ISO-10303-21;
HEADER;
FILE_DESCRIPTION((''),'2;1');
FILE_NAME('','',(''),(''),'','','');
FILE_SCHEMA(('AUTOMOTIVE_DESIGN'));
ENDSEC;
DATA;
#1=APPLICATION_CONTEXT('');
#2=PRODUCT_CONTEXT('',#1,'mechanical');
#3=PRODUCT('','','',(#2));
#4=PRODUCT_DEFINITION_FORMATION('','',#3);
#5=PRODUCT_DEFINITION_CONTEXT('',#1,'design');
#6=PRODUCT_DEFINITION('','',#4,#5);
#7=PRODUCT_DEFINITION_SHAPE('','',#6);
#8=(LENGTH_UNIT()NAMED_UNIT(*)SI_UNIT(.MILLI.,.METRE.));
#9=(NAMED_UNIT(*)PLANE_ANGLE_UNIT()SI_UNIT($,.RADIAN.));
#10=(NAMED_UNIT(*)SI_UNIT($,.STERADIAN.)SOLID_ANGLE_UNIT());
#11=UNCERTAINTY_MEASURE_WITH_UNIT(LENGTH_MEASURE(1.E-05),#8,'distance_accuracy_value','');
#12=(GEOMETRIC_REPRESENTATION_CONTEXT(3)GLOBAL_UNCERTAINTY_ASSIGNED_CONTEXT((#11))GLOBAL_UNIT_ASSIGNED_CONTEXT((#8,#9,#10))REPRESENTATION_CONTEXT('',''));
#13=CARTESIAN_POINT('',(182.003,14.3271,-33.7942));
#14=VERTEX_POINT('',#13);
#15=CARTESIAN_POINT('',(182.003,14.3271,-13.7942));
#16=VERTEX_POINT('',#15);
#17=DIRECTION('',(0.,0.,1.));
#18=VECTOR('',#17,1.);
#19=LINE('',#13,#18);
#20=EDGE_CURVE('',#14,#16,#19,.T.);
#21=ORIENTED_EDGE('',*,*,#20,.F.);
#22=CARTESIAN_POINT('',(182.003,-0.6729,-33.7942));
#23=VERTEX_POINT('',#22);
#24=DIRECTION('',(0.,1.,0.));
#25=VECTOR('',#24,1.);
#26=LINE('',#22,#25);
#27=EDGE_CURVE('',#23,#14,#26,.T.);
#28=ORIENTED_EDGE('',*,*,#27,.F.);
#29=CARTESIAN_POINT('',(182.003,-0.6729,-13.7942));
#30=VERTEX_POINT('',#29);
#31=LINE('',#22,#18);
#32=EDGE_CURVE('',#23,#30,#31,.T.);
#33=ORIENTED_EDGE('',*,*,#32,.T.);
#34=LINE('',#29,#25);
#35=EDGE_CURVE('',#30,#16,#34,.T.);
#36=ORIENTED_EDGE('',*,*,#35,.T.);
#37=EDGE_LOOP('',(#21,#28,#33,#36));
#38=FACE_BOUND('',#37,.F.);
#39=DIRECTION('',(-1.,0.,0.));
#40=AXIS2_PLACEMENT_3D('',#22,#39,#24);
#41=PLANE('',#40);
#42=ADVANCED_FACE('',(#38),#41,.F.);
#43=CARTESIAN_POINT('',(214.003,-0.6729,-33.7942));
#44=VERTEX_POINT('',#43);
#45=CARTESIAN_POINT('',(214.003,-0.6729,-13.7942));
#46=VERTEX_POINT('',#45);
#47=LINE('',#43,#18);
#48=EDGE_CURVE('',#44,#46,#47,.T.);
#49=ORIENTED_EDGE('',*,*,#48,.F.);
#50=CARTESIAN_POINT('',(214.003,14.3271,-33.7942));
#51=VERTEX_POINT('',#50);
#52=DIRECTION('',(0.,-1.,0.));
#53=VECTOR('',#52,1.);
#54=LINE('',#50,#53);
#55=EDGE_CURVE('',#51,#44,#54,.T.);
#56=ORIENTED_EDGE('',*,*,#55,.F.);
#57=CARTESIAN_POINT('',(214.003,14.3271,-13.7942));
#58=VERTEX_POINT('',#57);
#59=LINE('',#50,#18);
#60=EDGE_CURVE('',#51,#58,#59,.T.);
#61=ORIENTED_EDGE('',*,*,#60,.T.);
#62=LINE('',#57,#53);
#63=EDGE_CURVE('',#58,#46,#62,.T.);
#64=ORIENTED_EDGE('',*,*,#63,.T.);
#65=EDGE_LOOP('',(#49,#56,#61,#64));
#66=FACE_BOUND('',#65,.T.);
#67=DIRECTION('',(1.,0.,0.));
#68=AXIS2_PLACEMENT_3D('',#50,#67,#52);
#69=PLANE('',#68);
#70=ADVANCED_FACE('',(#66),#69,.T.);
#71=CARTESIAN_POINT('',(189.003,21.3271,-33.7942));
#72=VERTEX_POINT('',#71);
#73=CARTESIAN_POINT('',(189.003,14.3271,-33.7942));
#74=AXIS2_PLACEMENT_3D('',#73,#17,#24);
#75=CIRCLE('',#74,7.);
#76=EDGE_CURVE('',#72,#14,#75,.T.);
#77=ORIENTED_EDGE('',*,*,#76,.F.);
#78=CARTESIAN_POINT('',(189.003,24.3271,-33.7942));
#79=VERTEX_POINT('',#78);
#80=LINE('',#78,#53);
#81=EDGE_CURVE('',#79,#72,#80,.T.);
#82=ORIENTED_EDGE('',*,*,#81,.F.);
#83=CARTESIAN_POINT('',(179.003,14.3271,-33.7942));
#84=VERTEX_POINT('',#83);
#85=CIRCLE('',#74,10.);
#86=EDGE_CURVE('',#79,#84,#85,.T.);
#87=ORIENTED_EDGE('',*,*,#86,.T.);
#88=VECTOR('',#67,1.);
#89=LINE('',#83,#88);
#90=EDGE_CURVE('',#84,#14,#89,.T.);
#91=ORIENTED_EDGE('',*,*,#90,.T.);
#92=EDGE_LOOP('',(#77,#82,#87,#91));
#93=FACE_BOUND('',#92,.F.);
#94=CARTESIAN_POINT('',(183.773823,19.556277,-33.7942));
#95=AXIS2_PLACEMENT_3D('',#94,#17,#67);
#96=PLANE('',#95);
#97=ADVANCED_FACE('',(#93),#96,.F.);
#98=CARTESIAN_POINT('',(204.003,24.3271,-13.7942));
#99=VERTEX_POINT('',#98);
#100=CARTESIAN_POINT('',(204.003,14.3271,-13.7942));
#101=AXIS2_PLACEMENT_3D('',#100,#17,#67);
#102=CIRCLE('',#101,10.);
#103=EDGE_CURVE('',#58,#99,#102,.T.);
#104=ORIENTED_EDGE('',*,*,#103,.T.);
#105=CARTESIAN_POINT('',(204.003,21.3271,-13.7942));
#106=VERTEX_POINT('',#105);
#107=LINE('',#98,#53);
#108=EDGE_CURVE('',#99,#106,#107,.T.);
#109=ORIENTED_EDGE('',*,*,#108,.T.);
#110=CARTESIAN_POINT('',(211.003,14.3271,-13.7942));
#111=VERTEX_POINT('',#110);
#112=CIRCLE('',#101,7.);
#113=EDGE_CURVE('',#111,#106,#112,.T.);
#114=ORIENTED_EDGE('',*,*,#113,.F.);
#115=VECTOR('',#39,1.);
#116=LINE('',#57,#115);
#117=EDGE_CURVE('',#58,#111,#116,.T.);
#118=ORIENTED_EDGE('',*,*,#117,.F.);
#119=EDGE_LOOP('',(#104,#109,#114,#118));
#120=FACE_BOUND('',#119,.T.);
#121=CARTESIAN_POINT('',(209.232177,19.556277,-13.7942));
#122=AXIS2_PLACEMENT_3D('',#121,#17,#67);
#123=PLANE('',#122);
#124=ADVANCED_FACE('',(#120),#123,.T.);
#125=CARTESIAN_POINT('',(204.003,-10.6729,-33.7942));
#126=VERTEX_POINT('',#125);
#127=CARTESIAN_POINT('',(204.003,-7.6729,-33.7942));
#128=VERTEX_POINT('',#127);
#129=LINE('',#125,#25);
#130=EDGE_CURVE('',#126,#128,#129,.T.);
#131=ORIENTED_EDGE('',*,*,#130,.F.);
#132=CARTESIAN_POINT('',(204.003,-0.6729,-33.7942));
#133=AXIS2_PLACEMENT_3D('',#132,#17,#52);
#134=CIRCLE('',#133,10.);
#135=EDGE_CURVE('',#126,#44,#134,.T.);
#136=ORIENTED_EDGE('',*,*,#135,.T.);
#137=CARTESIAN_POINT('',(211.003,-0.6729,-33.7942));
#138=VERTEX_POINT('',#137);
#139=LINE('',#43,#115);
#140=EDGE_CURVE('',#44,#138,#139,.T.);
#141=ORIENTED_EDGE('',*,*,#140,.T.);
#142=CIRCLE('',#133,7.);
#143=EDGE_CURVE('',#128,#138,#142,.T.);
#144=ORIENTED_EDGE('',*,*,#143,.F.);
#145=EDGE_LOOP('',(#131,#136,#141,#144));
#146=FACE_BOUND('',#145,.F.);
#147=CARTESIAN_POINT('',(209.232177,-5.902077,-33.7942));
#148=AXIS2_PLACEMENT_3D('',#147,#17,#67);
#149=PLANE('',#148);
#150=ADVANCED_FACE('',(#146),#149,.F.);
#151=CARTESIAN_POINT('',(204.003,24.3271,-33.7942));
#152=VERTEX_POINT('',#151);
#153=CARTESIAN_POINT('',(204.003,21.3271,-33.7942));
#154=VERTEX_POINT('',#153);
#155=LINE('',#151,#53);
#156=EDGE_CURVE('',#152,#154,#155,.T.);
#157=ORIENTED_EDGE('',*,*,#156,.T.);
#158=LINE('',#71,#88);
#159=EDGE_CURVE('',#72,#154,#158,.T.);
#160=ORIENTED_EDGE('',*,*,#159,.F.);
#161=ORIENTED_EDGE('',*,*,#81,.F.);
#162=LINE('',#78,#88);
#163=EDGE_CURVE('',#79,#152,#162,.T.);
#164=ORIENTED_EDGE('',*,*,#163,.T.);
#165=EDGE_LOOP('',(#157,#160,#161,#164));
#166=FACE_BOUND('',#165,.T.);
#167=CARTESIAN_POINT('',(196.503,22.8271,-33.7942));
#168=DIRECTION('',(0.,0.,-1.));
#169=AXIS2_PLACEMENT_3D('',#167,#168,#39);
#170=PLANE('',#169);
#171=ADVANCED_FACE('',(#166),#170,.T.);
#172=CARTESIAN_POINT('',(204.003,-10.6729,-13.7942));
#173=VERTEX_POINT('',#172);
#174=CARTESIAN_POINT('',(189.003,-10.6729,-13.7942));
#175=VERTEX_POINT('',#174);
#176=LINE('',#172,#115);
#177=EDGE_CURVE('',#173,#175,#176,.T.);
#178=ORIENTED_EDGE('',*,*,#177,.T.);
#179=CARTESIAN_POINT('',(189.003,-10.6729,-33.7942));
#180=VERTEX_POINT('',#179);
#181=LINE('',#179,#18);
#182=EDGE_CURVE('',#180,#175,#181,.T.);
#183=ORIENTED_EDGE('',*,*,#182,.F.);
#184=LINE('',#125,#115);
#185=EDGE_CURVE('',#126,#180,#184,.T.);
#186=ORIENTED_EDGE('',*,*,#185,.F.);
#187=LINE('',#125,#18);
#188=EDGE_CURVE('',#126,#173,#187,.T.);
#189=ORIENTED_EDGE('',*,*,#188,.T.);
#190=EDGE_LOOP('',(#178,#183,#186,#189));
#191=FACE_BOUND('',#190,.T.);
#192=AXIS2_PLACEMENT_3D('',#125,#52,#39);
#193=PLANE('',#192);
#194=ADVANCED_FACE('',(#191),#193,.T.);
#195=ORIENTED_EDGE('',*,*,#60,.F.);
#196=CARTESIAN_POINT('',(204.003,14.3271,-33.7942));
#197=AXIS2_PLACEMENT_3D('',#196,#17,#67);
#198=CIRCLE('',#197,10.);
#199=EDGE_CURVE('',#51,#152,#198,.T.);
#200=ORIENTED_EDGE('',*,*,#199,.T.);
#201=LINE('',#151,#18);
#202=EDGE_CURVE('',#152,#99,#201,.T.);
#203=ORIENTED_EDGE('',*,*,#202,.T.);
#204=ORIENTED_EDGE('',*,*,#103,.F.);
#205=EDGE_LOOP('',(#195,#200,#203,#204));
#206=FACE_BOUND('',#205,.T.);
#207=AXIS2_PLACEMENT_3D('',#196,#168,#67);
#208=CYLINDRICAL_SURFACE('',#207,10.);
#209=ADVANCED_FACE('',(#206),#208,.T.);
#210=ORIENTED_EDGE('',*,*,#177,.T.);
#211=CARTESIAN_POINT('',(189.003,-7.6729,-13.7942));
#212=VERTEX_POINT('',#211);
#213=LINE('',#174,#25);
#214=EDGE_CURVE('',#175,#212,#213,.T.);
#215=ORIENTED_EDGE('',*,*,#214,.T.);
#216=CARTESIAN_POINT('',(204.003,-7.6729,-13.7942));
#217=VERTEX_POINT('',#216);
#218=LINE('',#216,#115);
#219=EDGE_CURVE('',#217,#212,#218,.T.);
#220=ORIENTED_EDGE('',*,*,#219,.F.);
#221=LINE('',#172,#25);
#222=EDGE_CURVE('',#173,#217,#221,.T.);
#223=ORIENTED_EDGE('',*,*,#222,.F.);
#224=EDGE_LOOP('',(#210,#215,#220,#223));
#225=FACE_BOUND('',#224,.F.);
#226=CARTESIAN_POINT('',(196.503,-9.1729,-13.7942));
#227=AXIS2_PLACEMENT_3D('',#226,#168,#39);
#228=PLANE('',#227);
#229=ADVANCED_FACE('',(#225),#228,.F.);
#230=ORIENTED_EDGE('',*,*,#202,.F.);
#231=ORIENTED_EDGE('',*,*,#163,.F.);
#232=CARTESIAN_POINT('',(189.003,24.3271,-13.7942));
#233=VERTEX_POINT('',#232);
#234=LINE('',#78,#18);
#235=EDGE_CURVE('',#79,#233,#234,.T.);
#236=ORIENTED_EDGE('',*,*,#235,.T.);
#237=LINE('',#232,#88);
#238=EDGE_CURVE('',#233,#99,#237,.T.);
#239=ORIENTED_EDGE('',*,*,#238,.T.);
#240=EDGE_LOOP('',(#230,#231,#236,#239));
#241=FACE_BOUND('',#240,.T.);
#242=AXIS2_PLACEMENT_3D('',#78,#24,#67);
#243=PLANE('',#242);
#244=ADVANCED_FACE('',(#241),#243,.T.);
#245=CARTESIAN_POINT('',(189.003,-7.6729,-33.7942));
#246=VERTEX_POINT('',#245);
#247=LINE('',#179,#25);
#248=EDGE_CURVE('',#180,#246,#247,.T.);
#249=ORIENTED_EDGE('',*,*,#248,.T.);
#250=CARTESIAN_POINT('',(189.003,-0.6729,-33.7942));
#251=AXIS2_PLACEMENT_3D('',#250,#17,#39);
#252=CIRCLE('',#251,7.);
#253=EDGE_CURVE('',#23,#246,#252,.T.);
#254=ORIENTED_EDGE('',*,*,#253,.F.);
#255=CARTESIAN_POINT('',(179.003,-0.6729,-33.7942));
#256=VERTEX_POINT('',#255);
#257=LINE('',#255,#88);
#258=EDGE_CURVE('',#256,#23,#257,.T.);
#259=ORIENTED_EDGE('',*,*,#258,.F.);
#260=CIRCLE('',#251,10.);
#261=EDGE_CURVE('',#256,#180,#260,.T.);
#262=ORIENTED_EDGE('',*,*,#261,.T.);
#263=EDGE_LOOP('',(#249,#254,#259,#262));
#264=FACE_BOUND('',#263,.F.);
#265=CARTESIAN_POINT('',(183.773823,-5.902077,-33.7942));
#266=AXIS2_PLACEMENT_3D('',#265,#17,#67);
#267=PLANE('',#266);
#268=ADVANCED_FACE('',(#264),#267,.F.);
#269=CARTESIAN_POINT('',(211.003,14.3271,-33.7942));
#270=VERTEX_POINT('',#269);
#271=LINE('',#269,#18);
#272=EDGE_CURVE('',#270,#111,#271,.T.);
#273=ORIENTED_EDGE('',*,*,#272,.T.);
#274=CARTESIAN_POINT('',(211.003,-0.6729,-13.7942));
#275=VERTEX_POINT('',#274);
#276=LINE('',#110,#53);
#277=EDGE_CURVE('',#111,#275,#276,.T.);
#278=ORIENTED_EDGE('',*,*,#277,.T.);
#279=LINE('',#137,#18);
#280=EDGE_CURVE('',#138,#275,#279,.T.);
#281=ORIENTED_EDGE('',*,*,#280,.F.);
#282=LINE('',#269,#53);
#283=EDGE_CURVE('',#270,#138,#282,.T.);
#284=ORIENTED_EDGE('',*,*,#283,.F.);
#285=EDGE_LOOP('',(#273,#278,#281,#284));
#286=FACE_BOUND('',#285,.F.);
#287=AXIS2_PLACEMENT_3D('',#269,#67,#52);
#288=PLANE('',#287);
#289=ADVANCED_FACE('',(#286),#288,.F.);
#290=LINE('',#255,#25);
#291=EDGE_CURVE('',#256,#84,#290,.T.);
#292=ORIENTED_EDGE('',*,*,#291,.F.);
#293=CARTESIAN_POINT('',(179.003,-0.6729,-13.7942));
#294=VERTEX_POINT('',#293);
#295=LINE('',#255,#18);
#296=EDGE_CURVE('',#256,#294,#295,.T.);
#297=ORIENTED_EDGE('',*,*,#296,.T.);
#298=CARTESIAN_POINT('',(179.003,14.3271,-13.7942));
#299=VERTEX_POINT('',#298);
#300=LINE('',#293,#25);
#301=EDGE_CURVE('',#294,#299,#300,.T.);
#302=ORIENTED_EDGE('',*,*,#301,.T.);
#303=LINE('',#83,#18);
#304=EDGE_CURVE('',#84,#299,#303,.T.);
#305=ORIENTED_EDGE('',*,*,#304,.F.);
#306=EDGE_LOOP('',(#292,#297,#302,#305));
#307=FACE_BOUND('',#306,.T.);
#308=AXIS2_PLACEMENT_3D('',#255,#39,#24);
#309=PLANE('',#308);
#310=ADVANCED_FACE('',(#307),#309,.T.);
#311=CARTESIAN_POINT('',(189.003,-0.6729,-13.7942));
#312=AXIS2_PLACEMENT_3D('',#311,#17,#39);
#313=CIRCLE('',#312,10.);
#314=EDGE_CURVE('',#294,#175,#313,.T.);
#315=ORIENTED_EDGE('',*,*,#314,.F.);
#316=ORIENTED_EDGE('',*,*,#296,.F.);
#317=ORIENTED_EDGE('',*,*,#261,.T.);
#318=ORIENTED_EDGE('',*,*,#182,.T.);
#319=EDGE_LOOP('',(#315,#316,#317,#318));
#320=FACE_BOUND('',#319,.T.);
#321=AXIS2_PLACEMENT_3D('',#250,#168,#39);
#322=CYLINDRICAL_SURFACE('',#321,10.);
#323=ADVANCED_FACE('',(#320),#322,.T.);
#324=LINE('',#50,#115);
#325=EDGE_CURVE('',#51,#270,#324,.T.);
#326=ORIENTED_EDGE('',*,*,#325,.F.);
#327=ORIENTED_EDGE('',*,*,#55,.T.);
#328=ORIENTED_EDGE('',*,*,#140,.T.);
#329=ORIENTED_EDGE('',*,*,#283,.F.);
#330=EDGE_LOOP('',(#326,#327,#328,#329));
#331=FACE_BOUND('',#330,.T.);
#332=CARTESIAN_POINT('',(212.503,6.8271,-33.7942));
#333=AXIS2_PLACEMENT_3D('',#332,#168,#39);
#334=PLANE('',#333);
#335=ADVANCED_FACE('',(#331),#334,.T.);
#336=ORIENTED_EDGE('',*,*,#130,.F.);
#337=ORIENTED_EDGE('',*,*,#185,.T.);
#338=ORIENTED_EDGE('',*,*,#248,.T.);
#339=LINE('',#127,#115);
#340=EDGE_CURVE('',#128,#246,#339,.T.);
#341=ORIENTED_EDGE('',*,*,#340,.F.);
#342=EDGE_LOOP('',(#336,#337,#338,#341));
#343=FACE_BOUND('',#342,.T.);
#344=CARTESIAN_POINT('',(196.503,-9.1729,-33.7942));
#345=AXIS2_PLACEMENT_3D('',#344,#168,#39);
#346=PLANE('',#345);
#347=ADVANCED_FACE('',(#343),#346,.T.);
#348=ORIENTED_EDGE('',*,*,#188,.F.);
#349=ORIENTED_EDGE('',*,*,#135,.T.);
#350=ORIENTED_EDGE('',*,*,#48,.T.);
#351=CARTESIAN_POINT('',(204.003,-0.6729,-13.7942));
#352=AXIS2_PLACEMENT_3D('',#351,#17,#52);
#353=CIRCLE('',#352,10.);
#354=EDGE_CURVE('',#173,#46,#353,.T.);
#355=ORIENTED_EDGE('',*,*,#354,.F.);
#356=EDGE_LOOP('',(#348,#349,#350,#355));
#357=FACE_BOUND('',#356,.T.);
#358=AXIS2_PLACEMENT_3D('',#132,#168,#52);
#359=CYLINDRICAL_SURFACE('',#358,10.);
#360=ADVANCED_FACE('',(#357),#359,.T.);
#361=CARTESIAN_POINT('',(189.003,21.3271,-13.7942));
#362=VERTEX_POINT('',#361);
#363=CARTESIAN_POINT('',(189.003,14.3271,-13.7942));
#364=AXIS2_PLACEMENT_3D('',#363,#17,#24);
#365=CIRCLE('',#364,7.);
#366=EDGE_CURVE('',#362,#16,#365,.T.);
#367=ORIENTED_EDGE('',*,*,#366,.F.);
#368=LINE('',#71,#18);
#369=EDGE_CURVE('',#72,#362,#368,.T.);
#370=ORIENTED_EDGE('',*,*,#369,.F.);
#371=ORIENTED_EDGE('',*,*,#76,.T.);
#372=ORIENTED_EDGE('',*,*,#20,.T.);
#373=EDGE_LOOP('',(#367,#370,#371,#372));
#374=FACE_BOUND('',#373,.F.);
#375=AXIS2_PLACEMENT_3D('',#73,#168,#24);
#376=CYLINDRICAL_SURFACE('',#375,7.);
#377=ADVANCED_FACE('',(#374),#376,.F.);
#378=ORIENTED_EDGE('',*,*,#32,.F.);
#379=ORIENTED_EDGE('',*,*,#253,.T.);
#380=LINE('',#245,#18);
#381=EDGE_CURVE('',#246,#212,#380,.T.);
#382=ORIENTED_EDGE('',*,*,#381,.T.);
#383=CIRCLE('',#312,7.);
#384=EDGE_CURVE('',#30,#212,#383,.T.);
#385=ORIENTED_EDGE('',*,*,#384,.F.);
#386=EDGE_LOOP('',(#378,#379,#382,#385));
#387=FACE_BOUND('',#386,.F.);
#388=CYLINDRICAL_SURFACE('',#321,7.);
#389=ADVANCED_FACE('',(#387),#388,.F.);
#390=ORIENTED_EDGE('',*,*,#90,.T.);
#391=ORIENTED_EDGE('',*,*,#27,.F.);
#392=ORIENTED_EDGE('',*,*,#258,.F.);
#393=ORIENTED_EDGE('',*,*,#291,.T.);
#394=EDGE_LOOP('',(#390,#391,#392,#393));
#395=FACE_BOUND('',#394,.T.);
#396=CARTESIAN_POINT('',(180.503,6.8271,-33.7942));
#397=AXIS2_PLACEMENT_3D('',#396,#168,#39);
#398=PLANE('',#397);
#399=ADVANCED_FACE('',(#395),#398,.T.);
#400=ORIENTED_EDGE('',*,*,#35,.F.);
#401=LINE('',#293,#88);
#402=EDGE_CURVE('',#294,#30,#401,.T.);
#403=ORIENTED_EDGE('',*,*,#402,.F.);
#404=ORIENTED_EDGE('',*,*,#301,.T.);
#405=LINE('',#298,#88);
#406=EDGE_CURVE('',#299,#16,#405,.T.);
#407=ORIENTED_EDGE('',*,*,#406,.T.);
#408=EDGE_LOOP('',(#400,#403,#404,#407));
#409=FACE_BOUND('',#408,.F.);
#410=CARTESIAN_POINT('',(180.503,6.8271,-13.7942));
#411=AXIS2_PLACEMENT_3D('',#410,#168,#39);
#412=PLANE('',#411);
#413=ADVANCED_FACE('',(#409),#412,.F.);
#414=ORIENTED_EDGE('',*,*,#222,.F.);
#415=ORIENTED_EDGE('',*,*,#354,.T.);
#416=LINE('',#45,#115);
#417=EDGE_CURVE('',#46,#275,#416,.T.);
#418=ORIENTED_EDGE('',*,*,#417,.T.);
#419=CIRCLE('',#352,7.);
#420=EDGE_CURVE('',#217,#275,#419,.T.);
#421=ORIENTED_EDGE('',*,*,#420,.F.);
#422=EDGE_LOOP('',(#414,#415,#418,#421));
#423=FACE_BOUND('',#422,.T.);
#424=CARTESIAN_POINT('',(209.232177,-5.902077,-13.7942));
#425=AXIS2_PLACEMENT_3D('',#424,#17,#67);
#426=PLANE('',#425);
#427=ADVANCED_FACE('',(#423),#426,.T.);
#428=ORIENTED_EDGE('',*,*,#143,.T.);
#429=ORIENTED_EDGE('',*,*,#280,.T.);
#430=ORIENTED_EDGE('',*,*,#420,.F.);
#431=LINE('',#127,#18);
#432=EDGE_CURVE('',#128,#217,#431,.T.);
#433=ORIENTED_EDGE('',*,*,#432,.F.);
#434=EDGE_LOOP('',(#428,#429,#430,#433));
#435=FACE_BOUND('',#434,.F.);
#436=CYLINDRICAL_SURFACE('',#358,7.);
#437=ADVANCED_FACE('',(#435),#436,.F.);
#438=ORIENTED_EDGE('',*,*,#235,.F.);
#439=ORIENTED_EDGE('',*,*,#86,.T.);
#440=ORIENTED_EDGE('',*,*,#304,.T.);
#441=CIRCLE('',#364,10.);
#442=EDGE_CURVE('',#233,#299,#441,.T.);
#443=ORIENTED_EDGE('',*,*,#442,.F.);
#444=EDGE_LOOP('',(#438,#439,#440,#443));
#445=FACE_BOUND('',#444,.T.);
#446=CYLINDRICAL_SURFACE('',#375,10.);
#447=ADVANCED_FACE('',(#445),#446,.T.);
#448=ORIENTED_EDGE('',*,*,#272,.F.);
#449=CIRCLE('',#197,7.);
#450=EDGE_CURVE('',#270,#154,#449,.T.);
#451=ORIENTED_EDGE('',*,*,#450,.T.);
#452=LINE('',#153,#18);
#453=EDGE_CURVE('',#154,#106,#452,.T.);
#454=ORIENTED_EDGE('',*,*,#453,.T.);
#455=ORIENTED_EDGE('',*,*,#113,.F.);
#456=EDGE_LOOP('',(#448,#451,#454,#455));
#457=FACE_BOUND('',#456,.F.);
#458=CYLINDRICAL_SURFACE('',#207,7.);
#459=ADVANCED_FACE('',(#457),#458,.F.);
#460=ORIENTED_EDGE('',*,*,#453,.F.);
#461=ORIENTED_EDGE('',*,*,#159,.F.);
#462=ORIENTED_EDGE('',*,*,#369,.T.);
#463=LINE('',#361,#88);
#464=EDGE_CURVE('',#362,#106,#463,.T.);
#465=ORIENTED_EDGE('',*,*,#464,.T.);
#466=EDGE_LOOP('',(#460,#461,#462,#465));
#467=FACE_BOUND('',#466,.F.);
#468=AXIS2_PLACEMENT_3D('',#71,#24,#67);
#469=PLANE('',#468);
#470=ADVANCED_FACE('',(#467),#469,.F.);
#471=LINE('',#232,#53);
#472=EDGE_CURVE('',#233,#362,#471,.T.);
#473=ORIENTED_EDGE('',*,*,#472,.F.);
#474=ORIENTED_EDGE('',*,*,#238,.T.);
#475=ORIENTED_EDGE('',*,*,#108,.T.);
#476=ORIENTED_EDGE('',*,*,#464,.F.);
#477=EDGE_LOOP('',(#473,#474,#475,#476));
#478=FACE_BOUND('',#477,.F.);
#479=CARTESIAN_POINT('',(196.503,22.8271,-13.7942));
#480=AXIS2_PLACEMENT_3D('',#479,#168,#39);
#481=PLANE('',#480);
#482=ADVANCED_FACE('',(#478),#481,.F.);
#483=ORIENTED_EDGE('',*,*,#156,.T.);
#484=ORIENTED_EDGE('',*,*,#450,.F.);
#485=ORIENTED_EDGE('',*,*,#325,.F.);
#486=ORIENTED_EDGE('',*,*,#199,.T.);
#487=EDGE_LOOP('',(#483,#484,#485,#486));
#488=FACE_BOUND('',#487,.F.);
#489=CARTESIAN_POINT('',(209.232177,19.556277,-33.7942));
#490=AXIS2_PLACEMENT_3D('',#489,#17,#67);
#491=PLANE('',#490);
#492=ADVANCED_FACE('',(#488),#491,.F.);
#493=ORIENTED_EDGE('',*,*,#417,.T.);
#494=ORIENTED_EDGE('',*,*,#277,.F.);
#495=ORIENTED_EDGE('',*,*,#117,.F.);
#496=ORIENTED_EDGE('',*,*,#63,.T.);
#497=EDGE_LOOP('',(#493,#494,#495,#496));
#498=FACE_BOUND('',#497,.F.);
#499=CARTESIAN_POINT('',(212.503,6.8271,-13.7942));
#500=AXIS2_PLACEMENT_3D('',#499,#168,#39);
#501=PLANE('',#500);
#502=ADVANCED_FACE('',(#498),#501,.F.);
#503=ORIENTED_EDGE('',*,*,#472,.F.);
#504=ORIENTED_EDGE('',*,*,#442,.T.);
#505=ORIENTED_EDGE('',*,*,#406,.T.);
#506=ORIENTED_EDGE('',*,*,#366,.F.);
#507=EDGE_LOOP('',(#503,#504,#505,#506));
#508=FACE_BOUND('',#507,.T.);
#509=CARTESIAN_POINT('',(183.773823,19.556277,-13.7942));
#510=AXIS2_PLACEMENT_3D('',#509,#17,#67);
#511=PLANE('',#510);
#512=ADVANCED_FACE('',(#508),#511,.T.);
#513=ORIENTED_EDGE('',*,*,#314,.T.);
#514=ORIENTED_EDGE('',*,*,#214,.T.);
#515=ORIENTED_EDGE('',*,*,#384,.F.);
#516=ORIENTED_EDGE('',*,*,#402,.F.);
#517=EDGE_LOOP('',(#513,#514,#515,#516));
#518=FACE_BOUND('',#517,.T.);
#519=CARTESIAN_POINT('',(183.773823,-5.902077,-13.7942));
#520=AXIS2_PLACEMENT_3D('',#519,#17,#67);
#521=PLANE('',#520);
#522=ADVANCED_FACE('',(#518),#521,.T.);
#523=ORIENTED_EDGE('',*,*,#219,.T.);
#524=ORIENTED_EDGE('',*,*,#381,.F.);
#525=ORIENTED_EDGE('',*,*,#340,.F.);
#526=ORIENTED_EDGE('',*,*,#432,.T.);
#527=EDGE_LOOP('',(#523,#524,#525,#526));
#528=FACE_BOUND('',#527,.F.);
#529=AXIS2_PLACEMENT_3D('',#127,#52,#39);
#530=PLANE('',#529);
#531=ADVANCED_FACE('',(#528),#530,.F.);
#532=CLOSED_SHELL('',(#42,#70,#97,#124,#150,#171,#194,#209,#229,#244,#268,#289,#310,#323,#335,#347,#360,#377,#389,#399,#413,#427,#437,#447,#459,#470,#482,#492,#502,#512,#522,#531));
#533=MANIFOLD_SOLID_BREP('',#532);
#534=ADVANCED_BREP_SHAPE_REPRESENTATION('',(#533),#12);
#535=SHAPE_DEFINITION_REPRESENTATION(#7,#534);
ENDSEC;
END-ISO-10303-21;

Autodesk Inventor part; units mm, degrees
ref_plane "YZ Plane" through (0, 0, 0) normal (1, 0, 0) x (0, 1, 0)
ref_plane "XZ Plane" through (0, 0, 0) normal (0, 1, 0) x (-1, 0, 0)
ref_plane "XY Plane" through (0, 0, 0) normal (0, 0, 1) x (1, 0, 0)
ref_plane "Work Plane1" through (44.003, -30.6729, -33.7942) normal (0, 0, 1) x (1, 0, 0)
sketch "Sketch1" plane through (44.003, -30.6729, -33.7942) normal (0, 0, 1) x (1, 0, 0)
  line L0 (145, 55) -> (160, 55)
  arc A0 (145, 55) -> (135, 45) centre (145, 45) ccw
  line L1 (135, 30) -> (135, 45)
  arc A1 (135, 30) -> (145, 20) centre (145, 30) ccw
  line L2 (160, 20) -> (145, 20)
  arc A2 (160, 20) -> (170, 30) centre (160, 30) ccw
  line L3 (170, 45) -> (170, 30)
  arc A3 (170, 45) -> (160, 55) centre (160, 45) ccw
  point P0 (-44.003, 30.6729)
surface extrude "ExtrusionSrf1" sketch "Sketch1" along normal blind 20 shown yes curves A3 L0 A0 L1 A1 L2 A2 L3
thicken "Thicken1" operation new thickness 3 both sides no extend neighbours no toward (-0.7330519, 0.6801727, 0) faces at (211.3335, -7.4746, -20.4609) (214.003, 4.3271, -27.1276) (210.8047, 21.6576, -20.4609) (199.003, 24.3271, -27.1276) (181.6724, 21.1289, -20.4609) (179.003, 9.3271, -27.1276) (188.2557, -10.6449, -20.4609) (194.003, -10.6729, -27.1276)
properties part number "CE-8.2.2-01-004"
